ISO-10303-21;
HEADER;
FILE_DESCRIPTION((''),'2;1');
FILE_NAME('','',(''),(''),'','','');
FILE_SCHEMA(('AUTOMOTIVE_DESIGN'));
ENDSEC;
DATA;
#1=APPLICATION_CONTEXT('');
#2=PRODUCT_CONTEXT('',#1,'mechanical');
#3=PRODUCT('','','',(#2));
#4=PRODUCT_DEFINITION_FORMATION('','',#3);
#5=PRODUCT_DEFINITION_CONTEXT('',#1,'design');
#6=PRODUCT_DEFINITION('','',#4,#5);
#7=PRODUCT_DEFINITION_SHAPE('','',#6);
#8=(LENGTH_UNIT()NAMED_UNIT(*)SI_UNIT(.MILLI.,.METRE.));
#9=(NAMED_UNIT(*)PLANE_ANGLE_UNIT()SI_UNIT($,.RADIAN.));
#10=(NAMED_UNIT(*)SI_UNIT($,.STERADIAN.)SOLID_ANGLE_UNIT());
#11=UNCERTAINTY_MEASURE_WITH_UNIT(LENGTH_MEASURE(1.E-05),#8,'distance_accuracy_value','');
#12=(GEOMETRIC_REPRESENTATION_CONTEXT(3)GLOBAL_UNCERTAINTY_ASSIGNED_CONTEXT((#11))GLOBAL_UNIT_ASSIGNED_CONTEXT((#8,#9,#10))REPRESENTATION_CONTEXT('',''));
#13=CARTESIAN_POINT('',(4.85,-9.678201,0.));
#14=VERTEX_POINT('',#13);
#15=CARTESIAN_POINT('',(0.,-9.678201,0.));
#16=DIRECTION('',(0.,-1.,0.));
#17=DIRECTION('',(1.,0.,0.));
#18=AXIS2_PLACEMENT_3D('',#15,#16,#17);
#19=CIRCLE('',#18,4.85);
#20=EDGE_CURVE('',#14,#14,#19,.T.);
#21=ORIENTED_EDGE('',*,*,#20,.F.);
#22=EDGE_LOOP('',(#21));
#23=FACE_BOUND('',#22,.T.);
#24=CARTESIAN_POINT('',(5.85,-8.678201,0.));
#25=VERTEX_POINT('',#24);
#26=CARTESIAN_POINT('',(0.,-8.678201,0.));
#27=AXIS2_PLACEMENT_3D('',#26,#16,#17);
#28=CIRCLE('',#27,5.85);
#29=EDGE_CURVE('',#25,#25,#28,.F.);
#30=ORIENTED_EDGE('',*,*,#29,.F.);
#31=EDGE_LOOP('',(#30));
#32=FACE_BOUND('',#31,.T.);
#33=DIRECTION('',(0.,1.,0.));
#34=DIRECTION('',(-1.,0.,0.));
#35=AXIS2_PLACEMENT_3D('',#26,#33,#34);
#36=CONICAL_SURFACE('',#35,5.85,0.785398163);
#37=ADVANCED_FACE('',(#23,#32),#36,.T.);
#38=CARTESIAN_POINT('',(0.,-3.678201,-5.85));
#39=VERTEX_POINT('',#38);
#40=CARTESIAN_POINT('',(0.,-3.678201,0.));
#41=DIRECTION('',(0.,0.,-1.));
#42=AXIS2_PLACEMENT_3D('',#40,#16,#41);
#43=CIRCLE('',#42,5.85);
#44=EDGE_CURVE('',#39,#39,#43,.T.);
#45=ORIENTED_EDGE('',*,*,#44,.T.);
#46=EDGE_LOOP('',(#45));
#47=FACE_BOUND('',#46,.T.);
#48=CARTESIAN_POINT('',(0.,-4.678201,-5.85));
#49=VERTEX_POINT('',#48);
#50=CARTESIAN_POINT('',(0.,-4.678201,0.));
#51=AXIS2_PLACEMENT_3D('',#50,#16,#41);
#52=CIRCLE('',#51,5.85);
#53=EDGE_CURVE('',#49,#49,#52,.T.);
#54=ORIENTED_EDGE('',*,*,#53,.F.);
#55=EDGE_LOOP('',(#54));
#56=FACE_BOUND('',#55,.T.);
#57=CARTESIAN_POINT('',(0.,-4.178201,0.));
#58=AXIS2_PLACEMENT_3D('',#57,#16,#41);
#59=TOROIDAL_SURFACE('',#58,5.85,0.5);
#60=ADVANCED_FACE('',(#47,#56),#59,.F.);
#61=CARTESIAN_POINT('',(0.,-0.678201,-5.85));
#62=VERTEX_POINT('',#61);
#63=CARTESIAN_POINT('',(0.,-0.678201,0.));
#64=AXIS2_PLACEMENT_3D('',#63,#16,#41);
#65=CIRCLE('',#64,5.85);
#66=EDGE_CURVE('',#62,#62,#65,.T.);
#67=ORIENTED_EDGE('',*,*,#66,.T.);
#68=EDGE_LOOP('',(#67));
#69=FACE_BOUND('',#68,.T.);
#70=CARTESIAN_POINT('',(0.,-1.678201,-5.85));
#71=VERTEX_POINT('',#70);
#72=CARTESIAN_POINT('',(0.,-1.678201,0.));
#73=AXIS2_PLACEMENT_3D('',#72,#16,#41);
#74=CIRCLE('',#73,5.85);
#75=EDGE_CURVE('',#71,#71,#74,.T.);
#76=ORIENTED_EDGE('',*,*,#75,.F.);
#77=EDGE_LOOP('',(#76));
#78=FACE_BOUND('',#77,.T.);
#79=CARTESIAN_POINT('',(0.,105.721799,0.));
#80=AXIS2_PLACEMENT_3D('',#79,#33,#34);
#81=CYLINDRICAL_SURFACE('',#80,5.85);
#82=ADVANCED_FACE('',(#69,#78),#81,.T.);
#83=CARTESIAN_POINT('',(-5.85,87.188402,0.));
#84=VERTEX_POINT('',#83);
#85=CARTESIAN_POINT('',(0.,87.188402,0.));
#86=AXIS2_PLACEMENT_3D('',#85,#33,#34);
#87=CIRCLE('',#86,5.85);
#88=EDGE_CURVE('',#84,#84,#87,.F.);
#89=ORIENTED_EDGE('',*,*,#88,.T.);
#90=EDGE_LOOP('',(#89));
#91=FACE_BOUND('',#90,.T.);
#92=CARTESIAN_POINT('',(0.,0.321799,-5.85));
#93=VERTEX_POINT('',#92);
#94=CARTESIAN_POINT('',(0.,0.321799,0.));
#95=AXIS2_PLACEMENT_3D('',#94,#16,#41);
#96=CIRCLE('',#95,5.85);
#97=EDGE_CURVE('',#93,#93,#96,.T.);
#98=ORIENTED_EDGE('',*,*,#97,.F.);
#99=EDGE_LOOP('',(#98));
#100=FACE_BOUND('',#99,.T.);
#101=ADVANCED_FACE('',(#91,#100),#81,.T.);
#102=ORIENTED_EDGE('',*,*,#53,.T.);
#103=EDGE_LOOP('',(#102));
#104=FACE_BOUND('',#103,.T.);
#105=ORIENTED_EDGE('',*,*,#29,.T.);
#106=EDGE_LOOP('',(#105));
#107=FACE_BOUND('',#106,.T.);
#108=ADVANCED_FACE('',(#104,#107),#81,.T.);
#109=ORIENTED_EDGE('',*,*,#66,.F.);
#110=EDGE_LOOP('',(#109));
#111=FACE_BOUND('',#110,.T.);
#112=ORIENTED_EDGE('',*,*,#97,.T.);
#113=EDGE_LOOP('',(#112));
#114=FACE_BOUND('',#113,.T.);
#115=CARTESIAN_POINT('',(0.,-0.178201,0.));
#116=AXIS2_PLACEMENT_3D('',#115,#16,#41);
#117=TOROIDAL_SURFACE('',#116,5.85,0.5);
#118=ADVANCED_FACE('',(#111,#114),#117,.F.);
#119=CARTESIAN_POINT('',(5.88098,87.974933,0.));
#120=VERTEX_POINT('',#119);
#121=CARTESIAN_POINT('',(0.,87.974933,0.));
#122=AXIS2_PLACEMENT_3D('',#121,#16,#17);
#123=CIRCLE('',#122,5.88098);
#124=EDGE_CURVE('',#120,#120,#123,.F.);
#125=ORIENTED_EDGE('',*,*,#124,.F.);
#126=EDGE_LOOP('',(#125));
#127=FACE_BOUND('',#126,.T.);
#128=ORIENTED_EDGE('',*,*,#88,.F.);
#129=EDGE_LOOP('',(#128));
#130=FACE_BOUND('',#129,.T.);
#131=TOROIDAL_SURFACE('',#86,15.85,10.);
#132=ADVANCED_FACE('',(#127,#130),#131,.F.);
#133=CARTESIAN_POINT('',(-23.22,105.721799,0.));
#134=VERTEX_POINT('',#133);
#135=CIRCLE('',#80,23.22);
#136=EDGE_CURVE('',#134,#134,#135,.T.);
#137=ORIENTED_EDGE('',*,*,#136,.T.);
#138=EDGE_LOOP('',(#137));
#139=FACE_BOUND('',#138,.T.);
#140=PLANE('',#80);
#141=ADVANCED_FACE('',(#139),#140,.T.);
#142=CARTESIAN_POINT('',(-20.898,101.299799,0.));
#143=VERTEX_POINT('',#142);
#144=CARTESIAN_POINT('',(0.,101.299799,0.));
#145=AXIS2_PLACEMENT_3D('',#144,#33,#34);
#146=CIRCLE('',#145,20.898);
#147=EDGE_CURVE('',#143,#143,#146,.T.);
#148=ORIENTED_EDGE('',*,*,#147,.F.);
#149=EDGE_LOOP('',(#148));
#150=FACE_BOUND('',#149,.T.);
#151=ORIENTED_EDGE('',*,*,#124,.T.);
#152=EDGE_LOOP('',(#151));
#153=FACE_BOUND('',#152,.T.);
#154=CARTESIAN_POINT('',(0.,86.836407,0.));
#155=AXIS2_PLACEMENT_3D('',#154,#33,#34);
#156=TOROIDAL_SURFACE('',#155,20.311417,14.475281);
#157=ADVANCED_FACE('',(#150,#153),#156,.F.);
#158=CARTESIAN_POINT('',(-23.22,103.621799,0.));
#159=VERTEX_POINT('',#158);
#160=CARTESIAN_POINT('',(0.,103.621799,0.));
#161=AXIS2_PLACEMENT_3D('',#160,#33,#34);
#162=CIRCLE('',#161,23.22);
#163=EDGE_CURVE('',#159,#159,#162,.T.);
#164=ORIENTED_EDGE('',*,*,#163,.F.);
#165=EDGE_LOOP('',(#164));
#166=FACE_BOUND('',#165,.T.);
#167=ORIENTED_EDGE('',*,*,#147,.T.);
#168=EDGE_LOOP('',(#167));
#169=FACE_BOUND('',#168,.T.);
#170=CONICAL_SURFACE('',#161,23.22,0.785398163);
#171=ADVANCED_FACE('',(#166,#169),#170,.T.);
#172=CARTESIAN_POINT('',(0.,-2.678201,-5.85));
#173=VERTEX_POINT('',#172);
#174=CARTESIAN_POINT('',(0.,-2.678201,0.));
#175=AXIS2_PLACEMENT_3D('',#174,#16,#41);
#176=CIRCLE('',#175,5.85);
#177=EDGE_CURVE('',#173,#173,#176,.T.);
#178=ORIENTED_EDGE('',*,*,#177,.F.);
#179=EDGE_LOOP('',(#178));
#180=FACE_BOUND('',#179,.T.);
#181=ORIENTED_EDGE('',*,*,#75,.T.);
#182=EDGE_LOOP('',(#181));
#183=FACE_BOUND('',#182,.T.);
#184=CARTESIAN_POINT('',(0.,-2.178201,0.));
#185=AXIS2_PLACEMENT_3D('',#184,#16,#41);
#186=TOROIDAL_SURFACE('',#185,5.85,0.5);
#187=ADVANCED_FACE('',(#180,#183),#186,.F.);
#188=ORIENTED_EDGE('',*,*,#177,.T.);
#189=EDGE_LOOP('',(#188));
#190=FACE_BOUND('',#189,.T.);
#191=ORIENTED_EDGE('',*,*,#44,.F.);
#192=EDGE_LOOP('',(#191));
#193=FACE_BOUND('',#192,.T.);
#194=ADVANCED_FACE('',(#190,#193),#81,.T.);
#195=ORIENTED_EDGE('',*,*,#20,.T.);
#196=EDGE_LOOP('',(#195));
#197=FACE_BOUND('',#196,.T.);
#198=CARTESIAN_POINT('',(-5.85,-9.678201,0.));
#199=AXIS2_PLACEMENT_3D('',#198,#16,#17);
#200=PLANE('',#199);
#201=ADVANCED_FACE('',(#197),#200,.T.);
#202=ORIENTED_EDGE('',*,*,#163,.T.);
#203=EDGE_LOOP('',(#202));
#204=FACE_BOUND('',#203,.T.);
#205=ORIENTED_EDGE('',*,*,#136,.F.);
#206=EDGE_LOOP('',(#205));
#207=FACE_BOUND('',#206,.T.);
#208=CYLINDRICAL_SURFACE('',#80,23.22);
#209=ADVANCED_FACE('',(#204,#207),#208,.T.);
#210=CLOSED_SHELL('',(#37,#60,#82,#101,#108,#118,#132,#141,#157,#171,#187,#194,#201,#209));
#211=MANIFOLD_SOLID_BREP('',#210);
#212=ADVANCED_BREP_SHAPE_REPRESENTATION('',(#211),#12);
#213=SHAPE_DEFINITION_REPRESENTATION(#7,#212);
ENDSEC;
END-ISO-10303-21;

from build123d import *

# Parameters (mm, degrees)
FILLET1_R     = 10
CHAMFER1_SIZE = 1


with BuildPart() as part:
    # Sketch1 → Revolve1 (revolve)
    with BuildSketch(Plane.XY):
        with BuildLine():
            Line((0, 105.721798884), (-23.22, 105.721798884))
            Line((-23.22, 105.721798884), (-23.22, 103.621798884))
            Line((-23.22, 103.621798884), (-20.898, 101.299798884))
            ThreePointArc((-20.898, 101.299798884), (-10.516266258, 97.494211563), (-5.85, 87.469798884))
            Line((-5.85, 87.469798884), (-5.85, -9.678201116))
            Line((-5.85, -9.678201116), (0, -9.678201116))
            Line((0, -9.678201116), (0, 105.721798884))
        make_face()
    revolve(axis=Axis((0, 105.721798884, 0), (0, -1, 0)))

    # Fillet1
    # the kernel refuses this fillet: 10 mm, written as the material it adds along each edge
    with BuildSketch(Plane(origin=(0, 87.469798884, 0), x_dir=(-1, 0, 0), z_dir=(0, 0, 1))) as fillet1_piece_1:
        with BuildLine():
            CenterArc((15.85, 0.281396682), FILLET1_R, 180, 4.511151465)
            Line((5.85, 0.281396682), (5.85, 0))
            ThreePointArc((5.85, 0), (5.86328205, -0.252702678), (5.880979556, -0.505134559))
        make_face()
    revolve(axis=Axis((0, 87.469798884, 0), (0, -1, 0)))

    # Chamfer1
    chamfer1_edges = [part.edges().sort_by_distance(p)[0] for p in [
        (5.85, -9.678201116, 0),
    ]]
    chamfer(chamfer1_edges, length=CHAMFER1_SIZE)

    # Sketch2 → Cut-Revolve1 (revolve, cut)
    with BuildSketch(Plane(origin=(0, 0, 0), x_dir=(0, 0, -1), z_dir=(1, 0, 0)), mode=Mode.PRIVATE) as cut_revolve1_sk:
        with BuildLine():
            Line((-7.85, -1.678201116), (-5.85, -1.678201116))
            ThreePointArc((-5.85, -1.678201116), (-5.35, -2.178201116), (-5.85, -2.678201116))
            Line((-5.85, -2.678201116), (-7.85, -2.678201116))
            Line((-7.85, -2.678201116), (-7.85, -1.678201116))
        make_face()
        with BuildLine():
            Line((-7.85, -4.678201116), (-5.85, -4.678201116))
            ThreePointArc((-5.85, -4.678201116), (-5.35, -4.178201116), (-5.85, -3.678201116))
            Line((-5.85, -3.678201116), (-7.85, -3.678201116))
            Line((-7.85, -3.678201116), (-7.85, -4.678201116))
        make_face()
        with BuildLine():
            Line((-7.85, 0.321798884), (-5.85, 0.321798884))
            ThreePointArc((-5.85, 0.321798884), (-5.35, -0.178201116), (-5.85, -0.678201116))
            Line((-5.85, -0.678201116), (-7.85, -0.678201116))
            Line((-7.85, -0.678201116), (-7.85, 0.321798884))
        make_face()
    revolve(cut_revolve1_sk.sketch.rotate(Axis((0, -8.678201116, 0), (0, 1, 0)), 180), axis=Axis((0, -8.678201116, 0), (0, 1, 0)), mode=Mode.SUBTRACT)


solid = part.part
